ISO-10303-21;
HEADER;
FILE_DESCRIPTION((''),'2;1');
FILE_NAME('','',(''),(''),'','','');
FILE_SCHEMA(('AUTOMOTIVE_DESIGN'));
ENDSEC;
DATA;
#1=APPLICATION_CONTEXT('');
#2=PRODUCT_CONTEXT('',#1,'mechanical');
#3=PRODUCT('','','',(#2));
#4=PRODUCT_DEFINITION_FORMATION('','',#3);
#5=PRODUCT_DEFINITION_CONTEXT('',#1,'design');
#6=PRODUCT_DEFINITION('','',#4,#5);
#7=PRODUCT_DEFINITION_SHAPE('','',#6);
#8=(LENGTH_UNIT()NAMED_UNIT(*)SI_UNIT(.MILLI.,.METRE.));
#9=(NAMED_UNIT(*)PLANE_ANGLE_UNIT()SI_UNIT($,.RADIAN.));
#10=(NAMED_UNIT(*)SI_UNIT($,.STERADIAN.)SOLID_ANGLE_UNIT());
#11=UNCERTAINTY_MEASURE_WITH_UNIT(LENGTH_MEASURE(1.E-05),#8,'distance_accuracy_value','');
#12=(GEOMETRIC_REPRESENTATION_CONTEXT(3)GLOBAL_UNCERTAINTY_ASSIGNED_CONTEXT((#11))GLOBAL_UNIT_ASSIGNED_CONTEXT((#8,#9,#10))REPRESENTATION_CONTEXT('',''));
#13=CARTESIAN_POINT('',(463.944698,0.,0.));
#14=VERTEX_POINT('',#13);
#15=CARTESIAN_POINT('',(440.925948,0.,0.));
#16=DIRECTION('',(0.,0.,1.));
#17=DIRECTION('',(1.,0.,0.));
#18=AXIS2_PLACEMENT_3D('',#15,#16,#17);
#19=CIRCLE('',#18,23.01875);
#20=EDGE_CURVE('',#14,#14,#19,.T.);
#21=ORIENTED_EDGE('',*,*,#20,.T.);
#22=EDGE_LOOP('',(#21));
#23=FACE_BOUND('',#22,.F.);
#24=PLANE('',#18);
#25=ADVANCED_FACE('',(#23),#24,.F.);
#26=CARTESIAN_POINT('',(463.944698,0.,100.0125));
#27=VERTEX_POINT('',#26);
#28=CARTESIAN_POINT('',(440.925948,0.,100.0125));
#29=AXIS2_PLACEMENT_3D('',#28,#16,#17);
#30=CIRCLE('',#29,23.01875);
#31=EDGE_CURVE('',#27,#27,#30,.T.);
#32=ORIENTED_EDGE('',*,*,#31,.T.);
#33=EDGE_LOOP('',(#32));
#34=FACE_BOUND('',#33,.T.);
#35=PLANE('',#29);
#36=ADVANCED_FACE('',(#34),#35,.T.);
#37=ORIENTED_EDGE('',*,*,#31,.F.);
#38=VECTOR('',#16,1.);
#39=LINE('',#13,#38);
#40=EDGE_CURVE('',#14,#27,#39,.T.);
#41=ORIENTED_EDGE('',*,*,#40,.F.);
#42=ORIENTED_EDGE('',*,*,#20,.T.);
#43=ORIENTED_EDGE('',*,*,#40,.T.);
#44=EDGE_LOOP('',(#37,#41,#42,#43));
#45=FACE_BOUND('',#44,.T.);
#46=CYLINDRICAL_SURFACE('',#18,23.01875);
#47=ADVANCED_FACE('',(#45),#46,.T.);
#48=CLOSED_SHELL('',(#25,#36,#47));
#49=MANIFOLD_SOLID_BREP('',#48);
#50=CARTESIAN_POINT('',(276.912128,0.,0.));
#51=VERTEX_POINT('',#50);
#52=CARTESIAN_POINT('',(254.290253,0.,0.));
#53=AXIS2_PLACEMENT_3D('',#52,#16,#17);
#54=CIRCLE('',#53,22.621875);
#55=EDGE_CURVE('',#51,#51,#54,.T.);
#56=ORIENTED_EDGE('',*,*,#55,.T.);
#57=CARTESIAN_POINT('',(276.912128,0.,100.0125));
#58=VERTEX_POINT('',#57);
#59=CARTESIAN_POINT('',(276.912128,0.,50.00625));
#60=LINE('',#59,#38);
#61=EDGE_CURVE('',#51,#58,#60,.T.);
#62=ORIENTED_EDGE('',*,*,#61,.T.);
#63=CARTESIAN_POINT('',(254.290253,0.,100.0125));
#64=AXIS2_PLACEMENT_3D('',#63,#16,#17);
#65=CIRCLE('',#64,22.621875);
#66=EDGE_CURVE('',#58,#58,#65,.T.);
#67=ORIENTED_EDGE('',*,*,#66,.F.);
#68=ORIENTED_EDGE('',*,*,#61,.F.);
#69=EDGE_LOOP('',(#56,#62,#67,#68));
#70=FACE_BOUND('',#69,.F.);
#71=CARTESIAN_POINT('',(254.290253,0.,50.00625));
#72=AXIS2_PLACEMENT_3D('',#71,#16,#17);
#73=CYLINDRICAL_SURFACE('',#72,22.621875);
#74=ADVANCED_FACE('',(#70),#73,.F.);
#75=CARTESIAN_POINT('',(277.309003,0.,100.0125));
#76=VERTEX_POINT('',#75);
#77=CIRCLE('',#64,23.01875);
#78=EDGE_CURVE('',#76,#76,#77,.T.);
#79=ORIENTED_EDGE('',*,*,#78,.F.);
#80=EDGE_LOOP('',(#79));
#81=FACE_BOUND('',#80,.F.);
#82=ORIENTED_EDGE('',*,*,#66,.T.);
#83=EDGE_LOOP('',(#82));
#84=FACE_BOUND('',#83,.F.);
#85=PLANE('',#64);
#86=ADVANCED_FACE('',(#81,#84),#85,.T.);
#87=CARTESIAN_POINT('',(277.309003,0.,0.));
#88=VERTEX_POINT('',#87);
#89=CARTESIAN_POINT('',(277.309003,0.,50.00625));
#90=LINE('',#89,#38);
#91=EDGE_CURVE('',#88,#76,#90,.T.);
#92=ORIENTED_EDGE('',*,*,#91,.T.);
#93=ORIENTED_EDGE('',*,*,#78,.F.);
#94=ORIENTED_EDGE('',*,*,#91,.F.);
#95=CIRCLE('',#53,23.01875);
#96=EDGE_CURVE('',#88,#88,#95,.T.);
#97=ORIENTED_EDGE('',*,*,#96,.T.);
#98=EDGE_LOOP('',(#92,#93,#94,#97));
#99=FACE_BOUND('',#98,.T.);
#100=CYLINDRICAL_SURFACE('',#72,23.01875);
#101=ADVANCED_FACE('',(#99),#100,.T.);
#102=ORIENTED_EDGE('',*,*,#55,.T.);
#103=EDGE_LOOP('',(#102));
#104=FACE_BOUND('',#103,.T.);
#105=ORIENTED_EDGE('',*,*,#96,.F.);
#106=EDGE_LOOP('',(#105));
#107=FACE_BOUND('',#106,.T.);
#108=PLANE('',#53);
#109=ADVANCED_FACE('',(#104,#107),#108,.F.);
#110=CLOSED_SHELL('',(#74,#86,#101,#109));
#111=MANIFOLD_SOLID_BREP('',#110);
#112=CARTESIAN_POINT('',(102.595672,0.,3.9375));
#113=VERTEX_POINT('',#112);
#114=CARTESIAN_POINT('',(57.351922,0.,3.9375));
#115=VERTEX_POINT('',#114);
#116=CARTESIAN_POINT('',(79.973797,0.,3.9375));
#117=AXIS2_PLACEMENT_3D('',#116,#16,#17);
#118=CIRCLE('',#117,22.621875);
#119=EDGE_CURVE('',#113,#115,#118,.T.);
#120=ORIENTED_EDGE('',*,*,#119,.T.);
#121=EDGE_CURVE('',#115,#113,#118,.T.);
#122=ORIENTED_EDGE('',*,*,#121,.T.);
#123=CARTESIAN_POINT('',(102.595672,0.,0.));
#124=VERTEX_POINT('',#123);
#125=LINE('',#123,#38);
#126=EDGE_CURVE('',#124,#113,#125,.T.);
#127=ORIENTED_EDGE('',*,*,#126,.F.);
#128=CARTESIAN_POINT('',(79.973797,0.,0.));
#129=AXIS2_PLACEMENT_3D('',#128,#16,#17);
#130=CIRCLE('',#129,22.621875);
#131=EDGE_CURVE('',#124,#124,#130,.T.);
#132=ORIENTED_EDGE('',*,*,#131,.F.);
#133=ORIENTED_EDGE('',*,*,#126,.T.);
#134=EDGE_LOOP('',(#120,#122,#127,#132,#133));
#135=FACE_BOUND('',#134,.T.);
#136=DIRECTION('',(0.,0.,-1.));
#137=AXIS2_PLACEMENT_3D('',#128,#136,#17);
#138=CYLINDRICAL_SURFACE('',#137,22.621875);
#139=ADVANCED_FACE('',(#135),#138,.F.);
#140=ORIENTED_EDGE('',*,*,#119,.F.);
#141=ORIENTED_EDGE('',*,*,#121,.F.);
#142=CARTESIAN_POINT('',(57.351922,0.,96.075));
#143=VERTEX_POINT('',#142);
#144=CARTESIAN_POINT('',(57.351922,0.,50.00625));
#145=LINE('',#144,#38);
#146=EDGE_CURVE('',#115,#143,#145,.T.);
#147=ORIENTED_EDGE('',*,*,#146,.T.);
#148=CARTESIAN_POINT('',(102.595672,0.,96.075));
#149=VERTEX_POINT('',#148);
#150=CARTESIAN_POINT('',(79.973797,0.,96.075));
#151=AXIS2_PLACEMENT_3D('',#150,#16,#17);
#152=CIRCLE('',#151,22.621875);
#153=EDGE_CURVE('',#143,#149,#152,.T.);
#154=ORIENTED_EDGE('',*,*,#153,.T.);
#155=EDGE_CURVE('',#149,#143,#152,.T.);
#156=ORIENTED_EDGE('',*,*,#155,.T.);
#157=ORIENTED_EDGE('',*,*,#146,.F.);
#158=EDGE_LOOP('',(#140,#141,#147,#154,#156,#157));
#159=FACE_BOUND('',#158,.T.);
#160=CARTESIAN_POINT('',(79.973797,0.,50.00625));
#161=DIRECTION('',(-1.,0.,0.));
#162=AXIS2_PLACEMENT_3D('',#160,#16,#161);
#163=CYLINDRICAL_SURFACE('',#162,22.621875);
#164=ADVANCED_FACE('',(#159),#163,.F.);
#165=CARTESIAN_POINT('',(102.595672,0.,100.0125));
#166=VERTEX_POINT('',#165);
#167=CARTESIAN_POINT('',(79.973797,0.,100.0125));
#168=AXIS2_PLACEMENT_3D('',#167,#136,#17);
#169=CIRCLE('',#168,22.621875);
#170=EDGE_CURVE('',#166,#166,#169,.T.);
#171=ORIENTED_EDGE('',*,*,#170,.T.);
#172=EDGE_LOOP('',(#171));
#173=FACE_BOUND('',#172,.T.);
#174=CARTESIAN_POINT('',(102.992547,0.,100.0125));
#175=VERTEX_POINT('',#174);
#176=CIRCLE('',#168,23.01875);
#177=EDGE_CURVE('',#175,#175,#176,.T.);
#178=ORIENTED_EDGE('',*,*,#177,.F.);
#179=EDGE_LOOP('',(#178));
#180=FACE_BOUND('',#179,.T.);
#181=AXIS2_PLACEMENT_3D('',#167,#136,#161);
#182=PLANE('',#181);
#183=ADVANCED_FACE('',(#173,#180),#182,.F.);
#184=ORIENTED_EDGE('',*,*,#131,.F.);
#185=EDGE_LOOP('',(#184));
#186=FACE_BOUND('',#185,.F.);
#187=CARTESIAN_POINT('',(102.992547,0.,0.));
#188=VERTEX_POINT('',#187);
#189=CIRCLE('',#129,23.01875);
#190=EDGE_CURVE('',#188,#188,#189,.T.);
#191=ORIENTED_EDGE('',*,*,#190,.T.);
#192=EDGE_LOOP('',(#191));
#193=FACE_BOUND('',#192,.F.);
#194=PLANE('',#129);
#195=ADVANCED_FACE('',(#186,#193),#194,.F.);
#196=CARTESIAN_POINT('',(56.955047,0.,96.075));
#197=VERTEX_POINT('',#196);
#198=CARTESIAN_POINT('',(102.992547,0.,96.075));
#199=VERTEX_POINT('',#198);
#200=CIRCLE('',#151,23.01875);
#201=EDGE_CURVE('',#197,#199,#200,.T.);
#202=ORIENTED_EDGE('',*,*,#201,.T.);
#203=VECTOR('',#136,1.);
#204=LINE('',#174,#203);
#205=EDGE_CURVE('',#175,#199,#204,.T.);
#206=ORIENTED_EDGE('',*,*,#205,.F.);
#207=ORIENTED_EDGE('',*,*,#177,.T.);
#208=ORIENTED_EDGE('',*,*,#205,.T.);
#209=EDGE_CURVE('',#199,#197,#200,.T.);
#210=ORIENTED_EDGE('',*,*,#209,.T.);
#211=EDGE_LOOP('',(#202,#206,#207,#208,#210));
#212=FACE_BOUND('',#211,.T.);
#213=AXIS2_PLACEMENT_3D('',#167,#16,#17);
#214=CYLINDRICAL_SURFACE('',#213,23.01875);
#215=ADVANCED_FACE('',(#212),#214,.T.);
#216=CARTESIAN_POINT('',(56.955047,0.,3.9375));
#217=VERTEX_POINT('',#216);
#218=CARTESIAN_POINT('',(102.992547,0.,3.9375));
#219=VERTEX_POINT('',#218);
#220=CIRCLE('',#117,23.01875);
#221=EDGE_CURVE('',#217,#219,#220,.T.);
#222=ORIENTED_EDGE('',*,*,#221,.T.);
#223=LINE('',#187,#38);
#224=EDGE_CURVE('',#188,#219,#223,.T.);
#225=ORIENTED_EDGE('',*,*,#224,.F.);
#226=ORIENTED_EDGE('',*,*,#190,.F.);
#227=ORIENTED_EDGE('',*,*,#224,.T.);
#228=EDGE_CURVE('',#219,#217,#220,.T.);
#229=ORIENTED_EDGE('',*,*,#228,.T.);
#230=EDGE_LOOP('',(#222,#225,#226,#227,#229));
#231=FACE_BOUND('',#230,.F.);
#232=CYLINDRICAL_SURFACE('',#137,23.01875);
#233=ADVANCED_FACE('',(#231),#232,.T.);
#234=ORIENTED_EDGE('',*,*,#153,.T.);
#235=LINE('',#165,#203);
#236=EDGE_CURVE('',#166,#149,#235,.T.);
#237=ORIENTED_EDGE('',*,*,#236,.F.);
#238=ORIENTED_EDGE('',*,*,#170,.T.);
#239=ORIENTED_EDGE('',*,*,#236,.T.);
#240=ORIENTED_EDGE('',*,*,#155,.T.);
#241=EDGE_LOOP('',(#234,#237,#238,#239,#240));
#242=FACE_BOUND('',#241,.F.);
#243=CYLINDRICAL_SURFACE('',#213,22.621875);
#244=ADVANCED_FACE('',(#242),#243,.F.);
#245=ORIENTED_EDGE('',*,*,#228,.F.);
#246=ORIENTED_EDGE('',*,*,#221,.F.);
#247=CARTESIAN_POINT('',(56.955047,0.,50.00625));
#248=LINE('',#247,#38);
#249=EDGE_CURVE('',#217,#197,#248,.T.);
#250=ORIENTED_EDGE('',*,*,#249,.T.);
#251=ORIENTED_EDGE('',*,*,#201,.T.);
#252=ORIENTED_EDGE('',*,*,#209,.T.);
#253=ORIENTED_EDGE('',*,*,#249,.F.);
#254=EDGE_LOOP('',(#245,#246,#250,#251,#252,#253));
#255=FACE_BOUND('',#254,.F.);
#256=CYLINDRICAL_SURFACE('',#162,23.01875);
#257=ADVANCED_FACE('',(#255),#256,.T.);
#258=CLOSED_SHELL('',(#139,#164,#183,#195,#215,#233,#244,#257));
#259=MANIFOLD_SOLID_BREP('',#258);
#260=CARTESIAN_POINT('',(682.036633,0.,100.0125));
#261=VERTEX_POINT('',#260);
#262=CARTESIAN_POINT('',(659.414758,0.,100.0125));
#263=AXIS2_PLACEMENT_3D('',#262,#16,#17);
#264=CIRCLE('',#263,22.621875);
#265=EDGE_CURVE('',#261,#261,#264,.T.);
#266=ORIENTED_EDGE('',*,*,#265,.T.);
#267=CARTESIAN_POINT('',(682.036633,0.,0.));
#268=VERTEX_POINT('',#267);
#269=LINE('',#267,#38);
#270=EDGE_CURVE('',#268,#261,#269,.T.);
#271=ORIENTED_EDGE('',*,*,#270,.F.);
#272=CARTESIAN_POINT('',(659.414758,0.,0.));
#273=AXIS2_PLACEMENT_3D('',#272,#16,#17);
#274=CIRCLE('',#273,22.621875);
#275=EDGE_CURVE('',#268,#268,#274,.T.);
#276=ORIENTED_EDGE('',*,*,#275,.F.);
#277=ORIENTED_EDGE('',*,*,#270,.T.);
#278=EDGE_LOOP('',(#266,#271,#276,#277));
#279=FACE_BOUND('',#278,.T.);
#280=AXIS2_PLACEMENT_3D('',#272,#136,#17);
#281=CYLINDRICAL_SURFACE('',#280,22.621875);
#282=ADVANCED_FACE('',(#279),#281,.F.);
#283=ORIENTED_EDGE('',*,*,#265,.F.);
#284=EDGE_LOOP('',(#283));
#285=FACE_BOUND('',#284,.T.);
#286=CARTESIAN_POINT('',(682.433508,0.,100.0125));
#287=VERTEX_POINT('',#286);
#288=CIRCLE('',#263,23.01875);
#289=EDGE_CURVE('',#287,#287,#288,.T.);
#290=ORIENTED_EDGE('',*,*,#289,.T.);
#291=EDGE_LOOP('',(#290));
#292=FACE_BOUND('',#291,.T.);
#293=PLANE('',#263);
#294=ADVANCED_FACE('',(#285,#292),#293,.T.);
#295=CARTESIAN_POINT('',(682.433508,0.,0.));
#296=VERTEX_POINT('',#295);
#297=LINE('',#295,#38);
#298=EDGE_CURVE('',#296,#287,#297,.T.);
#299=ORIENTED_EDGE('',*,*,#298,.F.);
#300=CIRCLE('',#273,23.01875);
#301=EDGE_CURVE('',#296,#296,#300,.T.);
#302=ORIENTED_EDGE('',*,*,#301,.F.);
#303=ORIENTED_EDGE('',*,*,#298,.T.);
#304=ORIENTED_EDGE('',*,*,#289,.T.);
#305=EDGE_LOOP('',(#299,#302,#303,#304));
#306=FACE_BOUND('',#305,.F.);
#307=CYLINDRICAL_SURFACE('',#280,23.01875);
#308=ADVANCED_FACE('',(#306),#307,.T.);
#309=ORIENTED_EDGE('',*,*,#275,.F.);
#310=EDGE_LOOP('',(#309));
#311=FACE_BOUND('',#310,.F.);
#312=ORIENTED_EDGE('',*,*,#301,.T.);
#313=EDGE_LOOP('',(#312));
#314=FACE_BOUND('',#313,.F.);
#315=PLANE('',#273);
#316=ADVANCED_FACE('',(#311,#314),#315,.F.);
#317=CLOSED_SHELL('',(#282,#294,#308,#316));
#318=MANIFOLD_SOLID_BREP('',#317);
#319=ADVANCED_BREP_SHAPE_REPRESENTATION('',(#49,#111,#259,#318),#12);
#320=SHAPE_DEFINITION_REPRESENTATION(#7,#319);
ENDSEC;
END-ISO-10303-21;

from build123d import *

# Parameters (mm, degrees)
F0_R     = 23.01875
F0_R_2   = 22.621875
F1_DEPTH = 3.9375
F2_W     = 0.396875
F2_H     = 100.0125
F5_R     = 23.01875
F5_R_2   = 22.8203125
F7_R     = 23.01875
F7_R_2   = 22.621875
F8_DEPTH = 100.0125


# Not quite as in the source:
# - a pattern or mirror of a feature is missing from the dataset's text; its kind, count and spacing are read off the source's solid


with BuildPart() as f1:
    # F0 (on Top) → F1 (new body)
    with BuildSketch(Plane.XY):
        with Locations((79.9737968977, 0)):
            Circle(F0_R)
        with Locations((79.9737968977, 0)):
            Circle(F0_R_2, mode=Mode.SUBTRACT)
    extrude(amount=F1_DEPTH)


with BuildPart() as f1_copies_1:
    # F1_copies: instance of F1
    add(f1.part.mirror(Plane.XY.offset(50.00625)))


with BuildPart() as f3:
    # F2 (on Front) → F3 (revolve)
    with BuildSketch(Plane.XZ):
        with Locations((277.110565424, 50.00625)):
            Rectangle(F2_W, F2_H)
    revolve(axis=Axis((254.290252924, 0, 67.7974149585), (0, 0, 1)))


with BuildPart() as f1_1:
    add(f1.part)

    add(f1_copies_1.part)  # F3_copies merges F1_copies_1
    # F3_copies: F3 across plane
    add(f3.part.mirror(Plane(origin=(167.132025, 0, 0), x_dir=(0, 0, -1), z_dir=(-1, 0, 0))))


with BuildPart() as f6:
    # F6: sweep along a path in F4
    with BuildLine(Plane.XZ) as f6_path:
        Line((440.9259481555, 0), (440.9259481555, 100.0125))
    # F5 (on Top) → F6 (sweep)
    with BuildSketch(Plane.XY):
        with Locations((440.9259481555, 0)):
            Circle(F5_R)
        with Locations((440.9259481555, 0)):
            Circle(F5_R_2, mode=Mode.SUBTRACT)
        with Locations((440.9259481555, 0)):
            Circle(F5_R_2)
    sweep(path=f6_path.line)


with BuildPart() as f8:
    # F7 (on Top) → F8 (new body)
    with BuildSketch(Plane.XY):
        with Locations((659.4147582325, 0)):
            Circle(F7_R)
        with Locations((659.4147582325, 0)):
            Circle(F7_R_2, mode=Mode.SUBTRACT)
    extrude(amount=F8_DEPTH)


solid = Compound([f3.part, f1_1.part, f6.part, f8.part])
